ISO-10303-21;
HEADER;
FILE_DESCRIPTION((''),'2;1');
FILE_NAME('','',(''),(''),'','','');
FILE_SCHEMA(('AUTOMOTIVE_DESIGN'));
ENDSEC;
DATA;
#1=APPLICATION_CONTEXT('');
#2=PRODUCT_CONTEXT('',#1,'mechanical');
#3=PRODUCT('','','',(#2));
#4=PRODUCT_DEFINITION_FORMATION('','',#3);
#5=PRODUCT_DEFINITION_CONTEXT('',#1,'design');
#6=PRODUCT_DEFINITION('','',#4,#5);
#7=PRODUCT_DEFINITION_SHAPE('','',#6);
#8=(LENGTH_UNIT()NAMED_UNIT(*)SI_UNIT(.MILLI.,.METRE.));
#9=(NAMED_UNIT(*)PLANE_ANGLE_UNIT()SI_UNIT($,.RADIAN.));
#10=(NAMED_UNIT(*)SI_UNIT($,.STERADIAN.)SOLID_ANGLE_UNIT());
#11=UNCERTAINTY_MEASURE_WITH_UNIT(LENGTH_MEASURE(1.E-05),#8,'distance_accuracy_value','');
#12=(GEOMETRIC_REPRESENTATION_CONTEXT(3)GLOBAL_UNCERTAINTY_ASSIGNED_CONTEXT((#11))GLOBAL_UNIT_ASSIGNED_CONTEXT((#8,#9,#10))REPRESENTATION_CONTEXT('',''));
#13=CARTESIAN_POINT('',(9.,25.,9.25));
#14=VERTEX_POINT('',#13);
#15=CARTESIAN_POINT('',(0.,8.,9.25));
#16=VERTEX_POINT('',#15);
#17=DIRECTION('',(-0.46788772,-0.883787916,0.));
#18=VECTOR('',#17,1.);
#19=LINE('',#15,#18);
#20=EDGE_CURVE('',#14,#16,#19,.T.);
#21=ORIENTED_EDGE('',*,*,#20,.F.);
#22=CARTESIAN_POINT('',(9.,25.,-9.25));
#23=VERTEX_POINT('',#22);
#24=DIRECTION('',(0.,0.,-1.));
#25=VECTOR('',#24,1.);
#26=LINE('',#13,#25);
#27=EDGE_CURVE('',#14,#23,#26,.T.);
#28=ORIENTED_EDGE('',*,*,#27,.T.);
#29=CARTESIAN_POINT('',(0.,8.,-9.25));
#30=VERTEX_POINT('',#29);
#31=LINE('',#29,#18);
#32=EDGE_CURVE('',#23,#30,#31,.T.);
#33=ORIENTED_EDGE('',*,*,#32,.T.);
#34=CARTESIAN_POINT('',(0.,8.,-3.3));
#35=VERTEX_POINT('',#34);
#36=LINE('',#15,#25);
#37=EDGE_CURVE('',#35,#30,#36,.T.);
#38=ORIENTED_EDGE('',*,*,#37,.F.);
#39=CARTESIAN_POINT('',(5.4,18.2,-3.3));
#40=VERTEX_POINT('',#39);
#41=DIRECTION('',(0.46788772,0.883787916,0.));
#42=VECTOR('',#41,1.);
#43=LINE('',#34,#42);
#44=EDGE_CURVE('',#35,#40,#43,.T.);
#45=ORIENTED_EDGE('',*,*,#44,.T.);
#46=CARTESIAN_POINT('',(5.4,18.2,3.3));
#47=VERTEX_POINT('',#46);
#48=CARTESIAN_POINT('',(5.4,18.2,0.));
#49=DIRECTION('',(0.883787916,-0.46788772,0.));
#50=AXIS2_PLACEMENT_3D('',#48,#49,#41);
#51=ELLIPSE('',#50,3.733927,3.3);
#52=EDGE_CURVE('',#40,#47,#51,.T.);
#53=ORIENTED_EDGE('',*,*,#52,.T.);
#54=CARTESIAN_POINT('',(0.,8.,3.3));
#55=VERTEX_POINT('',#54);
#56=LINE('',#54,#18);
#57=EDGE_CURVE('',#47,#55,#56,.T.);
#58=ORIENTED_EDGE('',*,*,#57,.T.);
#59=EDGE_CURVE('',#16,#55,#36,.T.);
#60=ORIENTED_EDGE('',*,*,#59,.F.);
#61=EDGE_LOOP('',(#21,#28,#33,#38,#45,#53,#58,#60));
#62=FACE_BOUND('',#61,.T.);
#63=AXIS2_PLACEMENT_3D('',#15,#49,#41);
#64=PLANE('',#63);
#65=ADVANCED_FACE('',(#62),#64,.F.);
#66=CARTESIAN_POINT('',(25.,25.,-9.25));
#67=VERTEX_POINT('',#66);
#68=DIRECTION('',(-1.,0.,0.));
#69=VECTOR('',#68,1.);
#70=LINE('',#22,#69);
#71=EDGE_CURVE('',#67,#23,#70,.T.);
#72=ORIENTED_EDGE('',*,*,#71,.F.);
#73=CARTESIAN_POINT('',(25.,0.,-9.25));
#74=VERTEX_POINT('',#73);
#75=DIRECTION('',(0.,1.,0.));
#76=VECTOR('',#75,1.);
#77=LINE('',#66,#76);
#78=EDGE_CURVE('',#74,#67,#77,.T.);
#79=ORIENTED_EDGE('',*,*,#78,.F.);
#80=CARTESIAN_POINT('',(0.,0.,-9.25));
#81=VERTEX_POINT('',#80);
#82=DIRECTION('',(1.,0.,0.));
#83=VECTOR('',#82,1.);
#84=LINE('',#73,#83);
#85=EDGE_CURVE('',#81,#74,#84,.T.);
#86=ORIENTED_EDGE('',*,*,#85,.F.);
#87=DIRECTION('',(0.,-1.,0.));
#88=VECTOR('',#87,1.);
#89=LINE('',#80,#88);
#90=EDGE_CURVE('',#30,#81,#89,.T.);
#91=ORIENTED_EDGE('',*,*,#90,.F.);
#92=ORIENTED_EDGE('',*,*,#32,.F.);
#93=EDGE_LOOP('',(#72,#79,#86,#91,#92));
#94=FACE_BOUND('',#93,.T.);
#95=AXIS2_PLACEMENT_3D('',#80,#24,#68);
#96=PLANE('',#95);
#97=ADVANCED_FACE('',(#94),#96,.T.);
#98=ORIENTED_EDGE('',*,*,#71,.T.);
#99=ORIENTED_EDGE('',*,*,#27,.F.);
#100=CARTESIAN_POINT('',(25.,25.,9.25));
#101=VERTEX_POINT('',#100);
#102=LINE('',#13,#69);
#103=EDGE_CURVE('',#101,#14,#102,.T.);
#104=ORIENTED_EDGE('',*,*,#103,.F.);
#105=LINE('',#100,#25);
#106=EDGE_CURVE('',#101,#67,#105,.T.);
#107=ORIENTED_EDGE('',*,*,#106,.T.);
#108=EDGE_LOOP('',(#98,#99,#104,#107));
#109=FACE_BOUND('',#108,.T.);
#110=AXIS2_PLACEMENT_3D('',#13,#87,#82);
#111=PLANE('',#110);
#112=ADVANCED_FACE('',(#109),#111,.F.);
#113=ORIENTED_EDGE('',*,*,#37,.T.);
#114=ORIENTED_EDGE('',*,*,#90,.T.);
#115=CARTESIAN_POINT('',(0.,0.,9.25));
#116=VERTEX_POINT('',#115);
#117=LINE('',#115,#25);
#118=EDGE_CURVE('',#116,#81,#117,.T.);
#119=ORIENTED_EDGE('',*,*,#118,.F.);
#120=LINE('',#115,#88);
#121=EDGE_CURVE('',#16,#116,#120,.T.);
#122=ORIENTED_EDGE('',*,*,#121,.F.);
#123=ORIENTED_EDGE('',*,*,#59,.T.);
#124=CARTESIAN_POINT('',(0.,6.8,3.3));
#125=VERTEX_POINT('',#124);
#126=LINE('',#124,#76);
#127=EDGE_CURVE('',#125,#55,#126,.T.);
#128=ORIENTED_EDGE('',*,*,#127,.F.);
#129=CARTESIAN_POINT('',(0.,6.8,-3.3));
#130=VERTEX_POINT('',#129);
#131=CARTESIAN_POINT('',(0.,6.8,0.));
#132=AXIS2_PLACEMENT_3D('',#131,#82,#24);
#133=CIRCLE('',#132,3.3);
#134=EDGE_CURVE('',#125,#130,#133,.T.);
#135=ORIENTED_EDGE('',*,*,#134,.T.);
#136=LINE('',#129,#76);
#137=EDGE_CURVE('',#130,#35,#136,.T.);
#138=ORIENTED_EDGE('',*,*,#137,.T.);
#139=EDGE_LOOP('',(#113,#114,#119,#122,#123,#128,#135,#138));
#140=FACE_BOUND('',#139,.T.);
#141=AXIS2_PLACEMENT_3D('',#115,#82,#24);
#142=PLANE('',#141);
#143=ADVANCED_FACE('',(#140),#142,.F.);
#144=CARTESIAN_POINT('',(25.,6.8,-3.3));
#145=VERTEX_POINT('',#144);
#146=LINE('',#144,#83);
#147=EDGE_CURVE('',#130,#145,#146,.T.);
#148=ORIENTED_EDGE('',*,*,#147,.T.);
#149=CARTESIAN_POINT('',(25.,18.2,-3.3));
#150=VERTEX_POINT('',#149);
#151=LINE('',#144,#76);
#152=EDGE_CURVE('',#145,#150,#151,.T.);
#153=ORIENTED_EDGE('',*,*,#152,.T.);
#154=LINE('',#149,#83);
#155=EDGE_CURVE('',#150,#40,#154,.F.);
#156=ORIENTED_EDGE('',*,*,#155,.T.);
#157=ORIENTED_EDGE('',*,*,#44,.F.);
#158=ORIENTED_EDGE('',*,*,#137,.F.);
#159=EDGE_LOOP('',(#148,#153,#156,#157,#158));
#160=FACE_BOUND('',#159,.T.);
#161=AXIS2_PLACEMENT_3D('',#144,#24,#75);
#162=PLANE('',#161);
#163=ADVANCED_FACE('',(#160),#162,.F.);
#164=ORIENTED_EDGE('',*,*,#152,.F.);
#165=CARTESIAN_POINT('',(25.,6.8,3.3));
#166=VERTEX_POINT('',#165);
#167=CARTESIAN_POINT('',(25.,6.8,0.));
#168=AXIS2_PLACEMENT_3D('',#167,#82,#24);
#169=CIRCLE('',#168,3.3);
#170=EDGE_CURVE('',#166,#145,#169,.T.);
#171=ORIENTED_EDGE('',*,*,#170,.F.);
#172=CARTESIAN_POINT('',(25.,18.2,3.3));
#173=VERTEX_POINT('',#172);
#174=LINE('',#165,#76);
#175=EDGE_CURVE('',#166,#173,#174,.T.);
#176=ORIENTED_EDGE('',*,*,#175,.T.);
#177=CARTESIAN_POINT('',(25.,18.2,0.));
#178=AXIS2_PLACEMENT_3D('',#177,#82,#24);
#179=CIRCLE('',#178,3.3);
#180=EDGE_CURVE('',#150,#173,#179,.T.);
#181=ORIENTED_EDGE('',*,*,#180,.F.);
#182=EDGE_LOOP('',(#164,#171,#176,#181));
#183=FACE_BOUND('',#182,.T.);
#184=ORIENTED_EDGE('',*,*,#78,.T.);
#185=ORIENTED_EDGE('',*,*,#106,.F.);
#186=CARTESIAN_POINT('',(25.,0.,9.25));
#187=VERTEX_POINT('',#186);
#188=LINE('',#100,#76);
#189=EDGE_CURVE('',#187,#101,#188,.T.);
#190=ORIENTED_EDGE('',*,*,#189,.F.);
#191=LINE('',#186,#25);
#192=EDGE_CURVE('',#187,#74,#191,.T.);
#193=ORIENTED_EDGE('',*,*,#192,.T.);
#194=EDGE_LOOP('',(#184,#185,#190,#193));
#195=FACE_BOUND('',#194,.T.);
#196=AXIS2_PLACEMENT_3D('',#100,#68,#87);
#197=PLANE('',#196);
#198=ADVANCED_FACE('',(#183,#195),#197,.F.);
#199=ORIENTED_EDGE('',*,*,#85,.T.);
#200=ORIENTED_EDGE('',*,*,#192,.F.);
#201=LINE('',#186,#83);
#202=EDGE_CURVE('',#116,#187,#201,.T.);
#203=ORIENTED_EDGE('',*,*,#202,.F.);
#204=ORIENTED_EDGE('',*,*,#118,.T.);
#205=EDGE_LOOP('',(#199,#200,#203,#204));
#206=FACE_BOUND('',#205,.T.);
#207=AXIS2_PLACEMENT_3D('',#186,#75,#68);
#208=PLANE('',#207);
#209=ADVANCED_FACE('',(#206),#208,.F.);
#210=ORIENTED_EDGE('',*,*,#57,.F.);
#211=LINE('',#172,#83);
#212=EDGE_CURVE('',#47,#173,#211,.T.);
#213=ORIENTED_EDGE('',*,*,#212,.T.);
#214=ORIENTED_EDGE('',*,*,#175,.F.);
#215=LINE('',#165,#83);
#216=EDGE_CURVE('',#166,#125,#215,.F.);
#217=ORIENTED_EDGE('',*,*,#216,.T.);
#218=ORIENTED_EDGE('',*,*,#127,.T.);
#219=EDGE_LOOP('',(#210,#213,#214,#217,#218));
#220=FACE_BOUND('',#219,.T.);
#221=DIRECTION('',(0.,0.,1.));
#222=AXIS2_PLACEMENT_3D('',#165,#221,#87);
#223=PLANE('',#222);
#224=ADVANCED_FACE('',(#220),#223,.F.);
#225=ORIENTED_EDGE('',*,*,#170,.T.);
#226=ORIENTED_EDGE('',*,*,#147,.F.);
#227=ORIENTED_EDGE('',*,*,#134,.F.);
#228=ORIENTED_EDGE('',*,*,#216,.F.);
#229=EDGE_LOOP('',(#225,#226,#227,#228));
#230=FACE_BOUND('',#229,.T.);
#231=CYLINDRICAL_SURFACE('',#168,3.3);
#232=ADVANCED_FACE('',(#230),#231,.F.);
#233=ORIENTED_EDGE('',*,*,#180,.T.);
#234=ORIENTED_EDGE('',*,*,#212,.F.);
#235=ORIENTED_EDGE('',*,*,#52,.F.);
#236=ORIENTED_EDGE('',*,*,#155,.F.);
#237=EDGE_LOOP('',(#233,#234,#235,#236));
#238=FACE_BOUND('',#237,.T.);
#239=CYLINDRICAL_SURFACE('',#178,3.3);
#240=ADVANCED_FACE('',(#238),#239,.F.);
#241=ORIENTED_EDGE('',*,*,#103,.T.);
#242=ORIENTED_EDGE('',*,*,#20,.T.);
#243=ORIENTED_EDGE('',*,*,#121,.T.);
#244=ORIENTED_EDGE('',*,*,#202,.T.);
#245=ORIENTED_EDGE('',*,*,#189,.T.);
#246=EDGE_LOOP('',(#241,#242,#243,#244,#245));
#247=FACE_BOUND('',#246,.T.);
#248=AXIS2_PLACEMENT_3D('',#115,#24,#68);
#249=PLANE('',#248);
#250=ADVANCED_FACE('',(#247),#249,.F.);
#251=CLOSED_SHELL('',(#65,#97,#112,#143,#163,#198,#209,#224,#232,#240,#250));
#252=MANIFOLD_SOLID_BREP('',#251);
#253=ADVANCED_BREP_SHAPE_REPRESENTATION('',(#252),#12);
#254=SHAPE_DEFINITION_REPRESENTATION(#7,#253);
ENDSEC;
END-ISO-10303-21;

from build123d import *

# Parameters (mm, degrees)
BOSS_EXTRUDE2_DEPTH      = 9.25
M6_CLEARANCE_SLOT1_DEPTH = 25


# Read off the part's stored shape, not the designer's step: M6 Clearance Slot1
with BuildPart() as part:
    # Sketch2 → Boss-Extrude2 (new, symmetric)
    with BuildSketch(Plane.XY):
        Polygon((0, 0), (0, 8), (9, 25), (25, 25), (25, 0), align=None)
    extrude(amount=BOSS_EXTRUDE2_DEPTH, both=True)

    # M6 Clearance Slot1 outline → M6 Clearance Slot1 (cut)
    with BuildSketch(Plane.YZ):
        with BuildLine():
            Line((6.8, -3.3), (18.2, -3.3))
            ThreePointArc((18.2, -3.3), (21.5, 0), (18.2, 3.3))
            Line((18.2, 3.3), (6.8, 3.3))
            ThreePointArc((6.8, 3.3), (3.5, 0), (6.8, -3.3))
        make_face()
    extrude(amount=M6_CLEARANCE_SLOT1_DEPTH, mode=Mode.SUBTRACT)


solid = part.part
